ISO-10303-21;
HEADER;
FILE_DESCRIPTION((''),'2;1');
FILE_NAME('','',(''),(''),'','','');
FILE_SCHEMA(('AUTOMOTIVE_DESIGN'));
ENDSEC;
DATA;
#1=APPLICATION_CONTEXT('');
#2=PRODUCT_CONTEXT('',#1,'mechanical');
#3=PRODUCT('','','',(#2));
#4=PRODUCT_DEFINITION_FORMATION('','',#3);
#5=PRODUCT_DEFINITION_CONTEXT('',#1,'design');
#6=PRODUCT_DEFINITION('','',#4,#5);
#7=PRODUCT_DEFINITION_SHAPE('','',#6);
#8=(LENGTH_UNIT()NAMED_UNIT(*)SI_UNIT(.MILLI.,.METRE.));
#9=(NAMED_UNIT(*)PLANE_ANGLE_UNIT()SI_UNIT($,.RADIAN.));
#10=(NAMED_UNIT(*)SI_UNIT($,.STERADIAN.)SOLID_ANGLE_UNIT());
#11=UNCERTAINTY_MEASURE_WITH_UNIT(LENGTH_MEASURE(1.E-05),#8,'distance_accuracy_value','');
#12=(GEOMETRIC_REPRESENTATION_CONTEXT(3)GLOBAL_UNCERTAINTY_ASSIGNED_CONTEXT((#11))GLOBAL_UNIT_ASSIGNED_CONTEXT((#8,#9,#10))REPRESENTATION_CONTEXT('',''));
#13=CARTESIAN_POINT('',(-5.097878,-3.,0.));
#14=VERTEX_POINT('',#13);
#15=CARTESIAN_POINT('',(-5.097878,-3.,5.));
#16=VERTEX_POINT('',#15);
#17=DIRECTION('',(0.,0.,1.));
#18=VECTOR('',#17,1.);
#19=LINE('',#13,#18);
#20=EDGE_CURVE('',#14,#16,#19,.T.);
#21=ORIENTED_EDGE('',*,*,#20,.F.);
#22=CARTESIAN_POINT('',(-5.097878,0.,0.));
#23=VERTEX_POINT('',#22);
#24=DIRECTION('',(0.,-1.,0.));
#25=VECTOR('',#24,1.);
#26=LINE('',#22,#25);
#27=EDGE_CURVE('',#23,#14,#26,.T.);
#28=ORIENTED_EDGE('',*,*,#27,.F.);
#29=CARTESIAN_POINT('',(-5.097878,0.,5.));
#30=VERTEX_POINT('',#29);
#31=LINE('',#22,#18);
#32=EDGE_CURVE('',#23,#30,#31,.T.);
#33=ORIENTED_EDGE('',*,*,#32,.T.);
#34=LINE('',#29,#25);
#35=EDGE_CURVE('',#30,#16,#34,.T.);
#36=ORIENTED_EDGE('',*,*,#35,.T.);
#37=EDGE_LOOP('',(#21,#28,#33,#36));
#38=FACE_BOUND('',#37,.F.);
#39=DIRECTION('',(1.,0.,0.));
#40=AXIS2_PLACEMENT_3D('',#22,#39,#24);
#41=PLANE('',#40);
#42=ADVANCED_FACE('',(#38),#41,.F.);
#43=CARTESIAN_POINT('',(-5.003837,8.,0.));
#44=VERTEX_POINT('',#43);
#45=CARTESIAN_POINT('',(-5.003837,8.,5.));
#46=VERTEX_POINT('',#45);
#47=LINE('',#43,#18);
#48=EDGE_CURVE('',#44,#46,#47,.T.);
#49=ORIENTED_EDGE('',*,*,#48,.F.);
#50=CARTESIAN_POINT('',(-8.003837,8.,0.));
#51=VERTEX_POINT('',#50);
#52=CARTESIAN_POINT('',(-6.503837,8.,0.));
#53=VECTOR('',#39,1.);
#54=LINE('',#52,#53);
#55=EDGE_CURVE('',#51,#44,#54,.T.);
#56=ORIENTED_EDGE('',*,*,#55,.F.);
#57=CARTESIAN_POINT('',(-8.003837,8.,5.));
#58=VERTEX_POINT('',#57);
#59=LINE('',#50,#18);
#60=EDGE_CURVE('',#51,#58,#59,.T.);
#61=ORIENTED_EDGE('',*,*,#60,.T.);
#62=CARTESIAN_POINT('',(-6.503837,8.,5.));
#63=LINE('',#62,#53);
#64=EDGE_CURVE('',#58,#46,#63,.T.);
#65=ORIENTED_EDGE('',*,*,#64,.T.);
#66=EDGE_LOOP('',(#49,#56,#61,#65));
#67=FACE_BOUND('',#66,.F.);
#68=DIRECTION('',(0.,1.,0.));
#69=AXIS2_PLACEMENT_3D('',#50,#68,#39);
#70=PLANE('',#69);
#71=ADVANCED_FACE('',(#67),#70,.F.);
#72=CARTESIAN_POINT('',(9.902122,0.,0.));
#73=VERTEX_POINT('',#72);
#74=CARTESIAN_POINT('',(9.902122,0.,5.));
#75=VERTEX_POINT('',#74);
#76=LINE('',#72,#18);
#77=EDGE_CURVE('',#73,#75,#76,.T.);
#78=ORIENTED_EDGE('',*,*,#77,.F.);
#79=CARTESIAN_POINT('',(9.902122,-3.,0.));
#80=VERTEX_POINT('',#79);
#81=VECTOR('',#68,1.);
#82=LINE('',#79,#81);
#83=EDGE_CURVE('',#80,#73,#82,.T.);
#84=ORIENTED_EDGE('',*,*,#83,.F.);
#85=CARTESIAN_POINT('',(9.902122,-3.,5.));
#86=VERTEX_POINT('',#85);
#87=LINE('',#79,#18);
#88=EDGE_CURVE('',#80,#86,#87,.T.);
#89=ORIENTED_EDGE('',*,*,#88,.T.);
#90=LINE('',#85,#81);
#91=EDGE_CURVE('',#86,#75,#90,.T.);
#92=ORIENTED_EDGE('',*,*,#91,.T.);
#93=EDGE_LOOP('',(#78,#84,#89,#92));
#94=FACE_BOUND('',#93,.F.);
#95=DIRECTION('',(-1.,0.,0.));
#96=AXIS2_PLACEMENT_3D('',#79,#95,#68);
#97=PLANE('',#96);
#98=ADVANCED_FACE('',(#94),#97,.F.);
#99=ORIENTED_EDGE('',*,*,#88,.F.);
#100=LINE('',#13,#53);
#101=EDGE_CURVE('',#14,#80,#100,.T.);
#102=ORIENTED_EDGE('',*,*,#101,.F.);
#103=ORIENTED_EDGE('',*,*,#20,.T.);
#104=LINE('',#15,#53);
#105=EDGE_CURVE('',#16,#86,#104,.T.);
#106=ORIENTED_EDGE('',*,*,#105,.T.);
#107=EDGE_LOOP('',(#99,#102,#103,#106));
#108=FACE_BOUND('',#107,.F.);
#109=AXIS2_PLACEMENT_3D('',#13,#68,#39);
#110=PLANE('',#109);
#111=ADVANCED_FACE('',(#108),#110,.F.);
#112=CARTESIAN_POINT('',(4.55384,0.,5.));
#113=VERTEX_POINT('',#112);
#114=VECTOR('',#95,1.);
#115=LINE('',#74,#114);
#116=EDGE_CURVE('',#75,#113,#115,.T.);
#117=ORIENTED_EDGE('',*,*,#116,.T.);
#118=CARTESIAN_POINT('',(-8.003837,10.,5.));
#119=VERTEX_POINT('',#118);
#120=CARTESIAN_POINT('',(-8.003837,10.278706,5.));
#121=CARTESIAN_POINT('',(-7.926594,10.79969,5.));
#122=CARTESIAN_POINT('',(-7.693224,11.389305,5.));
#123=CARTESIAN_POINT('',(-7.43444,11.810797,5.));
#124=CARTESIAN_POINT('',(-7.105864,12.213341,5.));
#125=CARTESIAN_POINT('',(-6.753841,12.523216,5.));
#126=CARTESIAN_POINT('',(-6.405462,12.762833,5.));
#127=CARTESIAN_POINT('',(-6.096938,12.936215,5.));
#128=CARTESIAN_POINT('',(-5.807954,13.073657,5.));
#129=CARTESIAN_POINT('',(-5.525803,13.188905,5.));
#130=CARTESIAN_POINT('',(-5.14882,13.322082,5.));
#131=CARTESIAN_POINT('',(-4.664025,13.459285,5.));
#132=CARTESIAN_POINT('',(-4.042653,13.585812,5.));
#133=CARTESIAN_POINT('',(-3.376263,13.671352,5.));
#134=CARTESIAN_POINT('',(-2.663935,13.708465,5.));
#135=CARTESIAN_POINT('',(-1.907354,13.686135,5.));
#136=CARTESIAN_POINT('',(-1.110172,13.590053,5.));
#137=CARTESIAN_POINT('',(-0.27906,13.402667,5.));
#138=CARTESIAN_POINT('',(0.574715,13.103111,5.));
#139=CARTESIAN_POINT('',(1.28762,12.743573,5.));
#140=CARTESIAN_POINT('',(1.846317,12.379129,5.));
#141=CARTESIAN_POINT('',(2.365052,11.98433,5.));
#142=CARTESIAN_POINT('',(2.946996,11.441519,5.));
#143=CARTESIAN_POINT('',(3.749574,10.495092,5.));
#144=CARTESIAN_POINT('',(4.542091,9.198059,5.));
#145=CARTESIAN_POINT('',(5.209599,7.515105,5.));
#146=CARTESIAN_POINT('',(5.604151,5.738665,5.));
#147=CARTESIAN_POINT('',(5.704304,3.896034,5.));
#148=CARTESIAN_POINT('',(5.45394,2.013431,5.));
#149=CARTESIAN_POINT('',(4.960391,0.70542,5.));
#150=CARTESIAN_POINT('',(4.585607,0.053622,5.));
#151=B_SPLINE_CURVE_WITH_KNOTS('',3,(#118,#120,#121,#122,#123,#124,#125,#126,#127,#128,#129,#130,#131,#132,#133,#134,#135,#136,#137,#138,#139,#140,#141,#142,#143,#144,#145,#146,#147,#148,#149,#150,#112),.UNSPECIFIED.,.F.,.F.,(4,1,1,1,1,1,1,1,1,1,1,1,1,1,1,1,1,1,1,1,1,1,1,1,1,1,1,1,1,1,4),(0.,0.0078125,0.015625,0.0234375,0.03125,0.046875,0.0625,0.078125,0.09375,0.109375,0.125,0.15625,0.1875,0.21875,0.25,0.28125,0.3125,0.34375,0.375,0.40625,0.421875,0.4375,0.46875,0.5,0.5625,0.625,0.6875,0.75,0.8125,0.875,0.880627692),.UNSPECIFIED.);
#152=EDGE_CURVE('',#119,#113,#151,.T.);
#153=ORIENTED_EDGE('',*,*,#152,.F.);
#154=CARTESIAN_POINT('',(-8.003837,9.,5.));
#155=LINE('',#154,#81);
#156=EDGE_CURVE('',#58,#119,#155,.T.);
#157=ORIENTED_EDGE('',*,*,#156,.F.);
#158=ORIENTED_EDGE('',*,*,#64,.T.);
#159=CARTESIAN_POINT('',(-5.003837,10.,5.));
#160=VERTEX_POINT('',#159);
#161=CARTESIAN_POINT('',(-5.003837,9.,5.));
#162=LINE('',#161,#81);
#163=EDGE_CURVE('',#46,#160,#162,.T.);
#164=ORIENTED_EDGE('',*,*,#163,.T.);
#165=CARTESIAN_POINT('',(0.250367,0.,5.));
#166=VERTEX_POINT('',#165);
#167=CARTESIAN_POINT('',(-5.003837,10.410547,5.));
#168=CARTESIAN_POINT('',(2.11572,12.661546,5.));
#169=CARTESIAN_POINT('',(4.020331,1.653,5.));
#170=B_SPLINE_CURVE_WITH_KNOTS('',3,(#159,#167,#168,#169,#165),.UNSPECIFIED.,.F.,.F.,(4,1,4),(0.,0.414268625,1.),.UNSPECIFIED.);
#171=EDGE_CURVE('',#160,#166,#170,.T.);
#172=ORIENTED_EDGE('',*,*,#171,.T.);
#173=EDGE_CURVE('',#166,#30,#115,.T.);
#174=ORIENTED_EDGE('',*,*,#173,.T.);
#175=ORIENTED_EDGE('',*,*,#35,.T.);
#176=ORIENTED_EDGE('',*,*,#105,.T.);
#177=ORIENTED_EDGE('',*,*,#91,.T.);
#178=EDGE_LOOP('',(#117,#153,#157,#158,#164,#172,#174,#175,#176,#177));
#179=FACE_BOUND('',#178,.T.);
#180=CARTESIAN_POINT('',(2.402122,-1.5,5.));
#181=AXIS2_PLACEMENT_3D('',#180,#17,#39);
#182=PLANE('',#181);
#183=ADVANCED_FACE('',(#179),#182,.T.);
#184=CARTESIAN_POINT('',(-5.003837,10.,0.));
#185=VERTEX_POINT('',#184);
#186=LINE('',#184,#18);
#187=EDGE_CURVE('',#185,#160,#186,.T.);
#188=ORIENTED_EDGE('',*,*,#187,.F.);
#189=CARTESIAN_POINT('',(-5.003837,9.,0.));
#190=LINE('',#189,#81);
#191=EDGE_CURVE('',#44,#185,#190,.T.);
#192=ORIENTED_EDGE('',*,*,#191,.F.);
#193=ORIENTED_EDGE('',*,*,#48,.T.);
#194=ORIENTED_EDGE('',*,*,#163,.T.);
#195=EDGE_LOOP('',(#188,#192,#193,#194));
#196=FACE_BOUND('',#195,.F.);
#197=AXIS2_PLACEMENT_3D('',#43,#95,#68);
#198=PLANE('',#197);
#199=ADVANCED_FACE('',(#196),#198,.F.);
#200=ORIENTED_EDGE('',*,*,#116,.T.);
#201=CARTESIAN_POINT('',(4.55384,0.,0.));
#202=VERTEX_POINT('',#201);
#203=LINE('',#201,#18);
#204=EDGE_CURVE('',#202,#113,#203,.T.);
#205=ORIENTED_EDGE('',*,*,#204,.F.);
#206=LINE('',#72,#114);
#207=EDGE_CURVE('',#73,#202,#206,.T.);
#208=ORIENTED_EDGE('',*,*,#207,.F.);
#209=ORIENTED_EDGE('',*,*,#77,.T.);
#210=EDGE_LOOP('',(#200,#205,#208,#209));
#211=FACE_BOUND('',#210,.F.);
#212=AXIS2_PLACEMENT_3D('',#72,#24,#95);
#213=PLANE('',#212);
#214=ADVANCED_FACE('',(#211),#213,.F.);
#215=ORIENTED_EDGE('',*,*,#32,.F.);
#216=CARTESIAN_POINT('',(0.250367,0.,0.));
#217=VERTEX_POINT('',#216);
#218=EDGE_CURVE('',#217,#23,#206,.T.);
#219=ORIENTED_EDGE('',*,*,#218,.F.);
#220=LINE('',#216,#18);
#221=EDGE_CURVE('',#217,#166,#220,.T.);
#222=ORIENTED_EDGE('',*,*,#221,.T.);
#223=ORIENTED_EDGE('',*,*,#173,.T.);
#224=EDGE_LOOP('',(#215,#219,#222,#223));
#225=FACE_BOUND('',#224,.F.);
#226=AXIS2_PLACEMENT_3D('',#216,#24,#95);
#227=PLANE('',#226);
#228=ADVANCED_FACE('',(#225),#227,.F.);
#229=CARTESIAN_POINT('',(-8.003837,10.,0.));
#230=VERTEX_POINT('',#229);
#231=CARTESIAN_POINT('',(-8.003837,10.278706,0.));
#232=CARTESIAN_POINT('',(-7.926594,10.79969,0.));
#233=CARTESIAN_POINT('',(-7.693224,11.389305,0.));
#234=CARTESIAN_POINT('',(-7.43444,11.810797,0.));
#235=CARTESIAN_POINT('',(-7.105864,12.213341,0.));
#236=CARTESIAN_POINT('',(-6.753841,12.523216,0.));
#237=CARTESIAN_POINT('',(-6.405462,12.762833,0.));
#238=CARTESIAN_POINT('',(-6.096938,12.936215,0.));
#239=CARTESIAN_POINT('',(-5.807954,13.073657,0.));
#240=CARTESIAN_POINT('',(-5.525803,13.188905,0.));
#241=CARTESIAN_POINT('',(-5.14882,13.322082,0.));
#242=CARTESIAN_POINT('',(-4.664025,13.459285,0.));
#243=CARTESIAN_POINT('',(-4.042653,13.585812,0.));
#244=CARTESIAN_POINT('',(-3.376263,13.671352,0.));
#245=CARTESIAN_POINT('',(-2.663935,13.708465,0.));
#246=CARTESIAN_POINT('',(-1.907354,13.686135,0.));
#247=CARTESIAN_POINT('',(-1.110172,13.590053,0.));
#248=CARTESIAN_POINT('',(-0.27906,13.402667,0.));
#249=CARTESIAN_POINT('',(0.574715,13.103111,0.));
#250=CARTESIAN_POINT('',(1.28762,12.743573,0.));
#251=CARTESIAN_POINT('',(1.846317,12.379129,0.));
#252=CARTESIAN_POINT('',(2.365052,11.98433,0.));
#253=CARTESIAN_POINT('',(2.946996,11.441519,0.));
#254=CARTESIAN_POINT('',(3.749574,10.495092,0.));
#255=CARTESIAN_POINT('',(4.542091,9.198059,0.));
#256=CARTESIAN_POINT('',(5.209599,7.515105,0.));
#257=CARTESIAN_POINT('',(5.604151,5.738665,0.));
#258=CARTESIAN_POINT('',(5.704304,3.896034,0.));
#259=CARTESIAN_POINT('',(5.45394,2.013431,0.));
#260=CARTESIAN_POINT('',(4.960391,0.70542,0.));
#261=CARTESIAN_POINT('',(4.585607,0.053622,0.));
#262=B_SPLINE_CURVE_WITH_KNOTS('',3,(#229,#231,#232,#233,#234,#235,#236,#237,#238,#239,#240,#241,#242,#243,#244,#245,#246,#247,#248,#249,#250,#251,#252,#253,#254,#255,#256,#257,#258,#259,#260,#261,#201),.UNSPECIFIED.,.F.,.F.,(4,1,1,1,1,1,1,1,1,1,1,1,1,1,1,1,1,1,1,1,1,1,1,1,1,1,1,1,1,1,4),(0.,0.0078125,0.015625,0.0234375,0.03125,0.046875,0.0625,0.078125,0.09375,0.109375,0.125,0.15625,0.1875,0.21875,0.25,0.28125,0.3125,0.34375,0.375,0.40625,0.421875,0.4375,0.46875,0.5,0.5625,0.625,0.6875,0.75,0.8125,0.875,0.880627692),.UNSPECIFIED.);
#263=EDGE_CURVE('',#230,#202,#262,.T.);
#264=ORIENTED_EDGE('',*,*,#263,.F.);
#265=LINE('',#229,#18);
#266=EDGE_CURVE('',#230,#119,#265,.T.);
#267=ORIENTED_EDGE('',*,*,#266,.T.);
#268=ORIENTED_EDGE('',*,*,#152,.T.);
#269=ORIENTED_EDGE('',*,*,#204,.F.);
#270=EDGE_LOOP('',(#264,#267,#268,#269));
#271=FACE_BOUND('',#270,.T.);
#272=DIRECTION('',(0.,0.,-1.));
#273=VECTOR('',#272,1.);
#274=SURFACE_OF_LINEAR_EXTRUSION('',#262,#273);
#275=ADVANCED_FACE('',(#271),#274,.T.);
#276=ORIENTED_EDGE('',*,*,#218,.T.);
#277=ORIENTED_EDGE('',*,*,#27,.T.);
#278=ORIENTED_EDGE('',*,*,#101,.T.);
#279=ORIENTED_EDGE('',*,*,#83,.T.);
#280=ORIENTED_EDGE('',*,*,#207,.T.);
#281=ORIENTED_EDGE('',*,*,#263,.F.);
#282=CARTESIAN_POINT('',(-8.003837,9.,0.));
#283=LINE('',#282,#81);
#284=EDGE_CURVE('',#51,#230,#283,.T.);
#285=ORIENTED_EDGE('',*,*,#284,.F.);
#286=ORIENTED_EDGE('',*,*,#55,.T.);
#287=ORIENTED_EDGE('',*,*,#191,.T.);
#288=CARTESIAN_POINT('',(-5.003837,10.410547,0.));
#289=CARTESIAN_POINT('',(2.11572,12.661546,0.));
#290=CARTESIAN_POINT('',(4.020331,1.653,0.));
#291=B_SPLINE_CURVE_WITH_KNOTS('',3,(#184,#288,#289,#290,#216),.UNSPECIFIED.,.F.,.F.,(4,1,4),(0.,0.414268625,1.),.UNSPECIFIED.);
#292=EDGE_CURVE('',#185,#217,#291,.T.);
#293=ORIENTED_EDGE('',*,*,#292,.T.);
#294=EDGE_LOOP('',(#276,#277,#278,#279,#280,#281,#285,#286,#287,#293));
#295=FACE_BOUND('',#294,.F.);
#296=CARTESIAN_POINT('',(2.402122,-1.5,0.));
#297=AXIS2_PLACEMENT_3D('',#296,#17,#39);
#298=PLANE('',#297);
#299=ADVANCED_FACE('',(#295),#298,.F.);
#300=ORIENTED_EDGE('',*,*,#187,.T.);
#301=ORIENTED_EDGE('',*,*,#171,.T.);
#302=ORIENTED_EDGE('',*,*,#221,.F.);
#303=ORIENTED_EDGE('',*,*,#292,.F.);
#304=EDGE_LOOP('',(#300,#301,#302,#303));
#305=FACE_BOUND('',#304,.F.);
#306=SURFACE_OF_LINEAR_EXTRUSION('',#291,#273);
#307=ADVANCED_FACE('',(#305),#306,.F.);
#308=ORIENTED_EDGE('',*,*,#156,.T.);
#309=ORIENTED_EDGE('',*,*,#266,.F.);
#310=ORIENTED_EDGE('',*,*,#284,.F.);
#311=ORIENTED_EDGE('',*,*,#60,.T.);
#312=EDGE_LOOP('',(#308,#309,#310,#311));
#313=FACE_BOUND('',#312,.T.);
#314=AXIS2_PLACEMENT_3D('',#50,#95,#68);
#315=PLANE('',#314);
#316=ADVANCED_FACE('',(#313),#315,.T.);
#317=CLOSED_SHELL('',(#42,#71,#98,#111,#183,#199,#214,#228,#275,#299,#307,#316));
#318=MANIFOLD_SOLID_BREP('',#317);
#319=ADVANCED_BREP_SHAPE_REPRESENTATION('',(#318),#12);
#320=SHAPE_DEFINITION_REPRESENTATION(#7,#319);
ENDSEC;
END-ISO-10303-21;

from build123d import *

# Parameters (mm, degrees)
F0_W     = 3
F0_H     = 2
F1_DEPTH = 5


# Not quite as in the source:
# - ends of sketch curves that miss each other by under 0.0002 mm in the source are joined
# - the dataset's text gives a spline's control points without its knots; the knots are read off the source's solid


with BuildPart() as f1:
    # F0 (on Top) → F1 (new body)
    with BuildSketch(Plane.XY):
        Polygon((0.2503667564, 0), (-5.0978784384, 0), (-5.0978784384, -3), (9.9021215616, -3), (9.9021215616, 0), (4.5538399041, 0), align=None)
        with BuildLine():
            add(Edge.make_bspline(
                [(-5.0038373292, 10), (-5.0038373292, 10.4105466628), (2.1157200772, 12.6615455049), (4.0203314378, 1.6529998477), (0.2503667564, 0)],
                knots=[0, 0, 0, 0, 0.4142686249, 1, 1, 1, 1], degree=3))
            Line((0.2503667564, 0), (4.5538399041, 0))
            add(Edge.make_bspline(
                [(-8.0038373298, 10), (-8.0038373298, 10.2787056237), (-7.9265937296, 10.7996899682), (-7.6932242014, 11.3893049019), (-7.4344399504, 11.8107970085), (-7.1058635967, 12.2133413532), (-6.7538412088, 12.5232161476), (-6.4054617225, 12.7628325838), (-6.0969380756, 12.93621453), (-5.8079542421, 13.0736567268), (-5.5258027553, 13.1889045793), (-5.1488196574, 13.3220823158), (-4.6640252083, 13.4592847565), (-4.0426527359, 13.5858120578), (-3.3762627135, 13.6713518347), (-2.6639349861, 13.7084653959), (-1.9073543006, 13.686135431), (-1.1101715023, 13.5900533961), (-0.2790603331, 13.4026671913), (0.5747150123, 13.1031110257), (1.2876198097, 12.743572644), (1.8463165534, 12.3791285027), (2.3650523455, 11.9843299327), (2.9469957376, 11.4415186656), (3.7495742807, 10.4950924187), (4.5420905535, 9.1980589469), (5.209598751, 7.5151054912), (5.6041511953, 5.7386647539), (5.7043043683, 3.8960335815), (5.4539395397, 2.0134312582), (4.9603909881, 0.7054202789), (4.5856072864, 0.0536222336), (4.5538399041, 0)],
                knots=[0, 0, 0, 0, 0.0078125, 0.015625, 0.0234375, 0.03125, 0.046875, 0.0625, 0.078125, 0.09375, 0.109375, 0.125, 0.15625, 0.1875, 0.21875, 0.25, 0.28125, 0.3125, 0.34375, 0.375, 0.40625, 0.421875, 0.4375, 0.46875, 0.5, 0.5625, 0.625, 0.6875, 0.75, 0.8125, 0.875, 0.8806276917, 0.8806276917, 0.8806276917, 0.8806276917], degree=3))
            Line((-8.0038373298, 10), (-5.0038373292, 10))
        make_face()
        with Locations((-6.5038373292, 9)):
            Rectangle(F0_W, F0_H)
    extrude(amount=F1_DEPTH)


solid = f1.part
